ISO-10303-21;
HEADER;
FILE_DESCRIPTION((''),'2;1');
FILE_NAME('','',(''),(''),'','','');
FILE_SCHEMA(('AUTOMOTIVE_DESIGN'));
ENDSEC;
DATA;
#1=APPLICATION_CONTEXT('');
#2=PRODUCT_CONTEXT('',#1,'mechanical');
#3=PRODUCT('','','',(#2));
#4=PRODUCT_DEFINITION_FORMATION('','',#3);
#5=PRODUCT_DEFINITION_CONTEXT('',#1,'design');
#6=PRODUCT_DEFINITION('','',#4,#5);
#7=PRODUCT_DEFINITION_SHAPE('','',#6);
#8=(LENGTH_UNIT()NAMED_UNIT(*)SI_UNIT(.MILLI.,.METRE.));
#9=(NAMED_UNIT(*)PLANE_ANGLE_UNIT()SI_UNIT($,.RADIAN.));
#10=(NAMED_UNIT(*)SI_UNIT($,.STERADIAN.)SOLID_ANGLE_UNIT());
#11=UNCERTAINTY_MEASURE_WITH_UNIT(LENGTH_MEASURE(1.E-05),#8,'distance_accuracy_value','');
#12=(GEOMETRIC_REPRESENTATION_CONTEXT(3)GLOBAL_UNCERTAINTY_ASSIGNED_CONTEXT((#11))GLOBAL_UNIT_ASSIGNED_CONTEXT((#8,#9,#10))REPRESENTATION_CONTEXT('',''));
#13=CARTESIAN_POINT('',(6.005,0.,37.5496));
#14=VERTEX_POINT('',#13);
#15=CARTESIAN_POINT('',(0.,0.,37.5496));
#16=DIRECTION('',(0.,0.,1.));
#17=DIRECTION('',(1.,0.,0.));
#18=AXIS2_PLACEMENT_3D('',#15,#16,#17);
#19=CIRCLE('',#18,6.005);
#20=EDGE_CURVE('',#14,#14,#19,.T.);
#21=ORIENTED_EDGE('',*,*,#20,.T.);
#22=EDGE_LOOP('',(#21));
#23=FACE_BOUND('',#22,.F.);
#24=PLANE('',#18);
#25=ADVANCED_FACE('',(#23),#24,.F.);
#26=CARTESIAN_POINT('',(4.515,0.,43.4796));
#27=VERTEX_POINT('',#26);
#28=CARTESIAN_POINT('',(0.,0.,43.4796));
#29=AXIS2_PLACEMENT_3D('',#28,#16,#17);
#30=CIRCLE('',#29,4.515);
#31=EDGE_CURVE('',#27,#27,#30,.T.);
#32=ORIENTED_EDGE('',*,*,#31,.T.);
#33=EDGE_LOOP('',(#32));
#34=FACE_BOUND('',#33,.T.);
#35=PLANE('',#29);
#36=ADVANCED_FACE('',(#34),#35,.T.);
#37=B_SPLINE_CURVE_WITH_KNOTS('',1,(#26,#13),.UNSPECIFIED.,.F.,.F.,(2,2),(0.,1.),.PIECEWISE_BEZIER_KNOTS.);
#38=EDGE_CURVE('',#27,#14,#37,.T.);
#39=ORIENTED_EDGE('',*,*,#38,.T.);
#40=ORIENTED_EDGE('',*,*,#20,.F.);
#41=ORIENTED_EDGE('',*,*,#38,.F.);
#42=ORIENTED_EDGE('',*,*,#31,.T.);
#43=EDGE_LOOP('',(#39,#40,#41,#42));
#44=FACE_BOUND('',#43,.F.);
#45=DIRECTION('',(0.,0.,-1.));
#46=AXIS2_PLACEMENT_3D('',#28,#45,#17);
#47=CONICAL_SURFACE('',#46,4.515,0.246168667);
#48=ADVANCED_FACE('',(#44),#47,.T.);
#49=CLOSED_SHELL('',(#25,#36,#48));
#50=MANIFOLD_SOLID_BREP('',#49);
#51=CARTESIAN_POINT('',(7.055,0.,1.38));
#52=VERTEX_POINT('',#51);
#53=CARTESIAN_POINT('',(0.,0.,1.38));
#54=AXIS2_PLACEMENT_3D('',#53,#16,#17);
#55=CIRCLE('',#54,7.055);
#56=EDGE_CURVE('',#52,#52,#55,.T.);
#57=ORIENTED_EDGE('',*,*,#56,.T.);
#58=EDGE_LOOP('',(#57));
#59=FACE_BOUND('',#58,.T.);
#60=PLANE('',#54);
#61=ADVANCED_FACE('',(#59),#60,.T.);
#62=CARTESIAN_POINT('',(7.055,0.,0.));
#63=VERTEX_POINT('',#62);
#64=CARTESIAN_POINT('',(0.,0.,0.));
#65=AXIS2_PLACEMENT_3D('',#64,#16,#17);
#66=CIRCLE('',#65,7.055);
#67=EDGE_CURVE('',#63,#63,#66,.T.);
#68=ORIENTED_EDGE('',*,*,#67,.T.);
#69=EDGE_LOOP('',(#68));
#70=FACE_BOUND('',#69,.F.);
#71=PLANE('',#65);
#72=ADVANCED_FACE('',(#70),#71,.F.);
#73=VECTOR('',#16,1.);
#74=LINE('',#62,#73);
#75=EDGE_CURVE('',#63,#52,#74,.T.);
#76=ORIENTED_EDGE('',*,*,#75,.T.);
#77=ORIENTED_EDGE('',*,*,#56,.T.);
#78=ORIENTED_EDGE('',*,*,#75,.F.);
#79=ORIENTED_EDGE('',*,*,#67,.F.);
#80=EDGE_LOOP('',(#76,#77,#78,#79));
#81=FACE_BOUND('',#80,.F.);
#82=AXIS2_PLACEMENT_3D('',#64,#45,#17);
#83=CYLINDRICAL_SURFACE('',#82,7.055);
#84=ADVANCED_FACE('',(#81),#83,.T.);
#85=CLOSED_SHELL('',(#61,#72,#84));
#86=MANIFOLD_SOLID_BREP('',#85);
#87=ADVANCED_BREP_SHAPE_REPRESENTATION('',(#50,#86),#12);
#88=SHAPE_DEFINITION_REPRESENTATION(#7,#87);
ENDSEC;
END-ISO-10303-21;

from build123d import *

# Parameters (mm, degrees)
F0_R     = 7.055
F1_DEPTH = 1.38
F7_R     = 4.515
F4_R     = 6.005


# Not quite as in the source:
# - the program builds the solid bodies; features that only make, move or delete a surface that nothing else refers to are left out


with BuildPart() as f1:
    # F0 (on Top) → F1 (new body)
    with BuildSketch(Plane.XY):
        Circle(F0_R)
    extrude(amount=F1_DEPTH)


with BuildPart() as f9:
    # F7 (on offset) → F9 section 0
    with BuildSketch(Plane.XY.offset(43.4796)):
        Circle(F7_R)
    # F4 (on offset) → F9 section 1
    with BuildSketch(Plane.XY.offset(37.5496)):
        Circle(F4_R)
    loft()


solid = Compound([f1.part, f9.part])
